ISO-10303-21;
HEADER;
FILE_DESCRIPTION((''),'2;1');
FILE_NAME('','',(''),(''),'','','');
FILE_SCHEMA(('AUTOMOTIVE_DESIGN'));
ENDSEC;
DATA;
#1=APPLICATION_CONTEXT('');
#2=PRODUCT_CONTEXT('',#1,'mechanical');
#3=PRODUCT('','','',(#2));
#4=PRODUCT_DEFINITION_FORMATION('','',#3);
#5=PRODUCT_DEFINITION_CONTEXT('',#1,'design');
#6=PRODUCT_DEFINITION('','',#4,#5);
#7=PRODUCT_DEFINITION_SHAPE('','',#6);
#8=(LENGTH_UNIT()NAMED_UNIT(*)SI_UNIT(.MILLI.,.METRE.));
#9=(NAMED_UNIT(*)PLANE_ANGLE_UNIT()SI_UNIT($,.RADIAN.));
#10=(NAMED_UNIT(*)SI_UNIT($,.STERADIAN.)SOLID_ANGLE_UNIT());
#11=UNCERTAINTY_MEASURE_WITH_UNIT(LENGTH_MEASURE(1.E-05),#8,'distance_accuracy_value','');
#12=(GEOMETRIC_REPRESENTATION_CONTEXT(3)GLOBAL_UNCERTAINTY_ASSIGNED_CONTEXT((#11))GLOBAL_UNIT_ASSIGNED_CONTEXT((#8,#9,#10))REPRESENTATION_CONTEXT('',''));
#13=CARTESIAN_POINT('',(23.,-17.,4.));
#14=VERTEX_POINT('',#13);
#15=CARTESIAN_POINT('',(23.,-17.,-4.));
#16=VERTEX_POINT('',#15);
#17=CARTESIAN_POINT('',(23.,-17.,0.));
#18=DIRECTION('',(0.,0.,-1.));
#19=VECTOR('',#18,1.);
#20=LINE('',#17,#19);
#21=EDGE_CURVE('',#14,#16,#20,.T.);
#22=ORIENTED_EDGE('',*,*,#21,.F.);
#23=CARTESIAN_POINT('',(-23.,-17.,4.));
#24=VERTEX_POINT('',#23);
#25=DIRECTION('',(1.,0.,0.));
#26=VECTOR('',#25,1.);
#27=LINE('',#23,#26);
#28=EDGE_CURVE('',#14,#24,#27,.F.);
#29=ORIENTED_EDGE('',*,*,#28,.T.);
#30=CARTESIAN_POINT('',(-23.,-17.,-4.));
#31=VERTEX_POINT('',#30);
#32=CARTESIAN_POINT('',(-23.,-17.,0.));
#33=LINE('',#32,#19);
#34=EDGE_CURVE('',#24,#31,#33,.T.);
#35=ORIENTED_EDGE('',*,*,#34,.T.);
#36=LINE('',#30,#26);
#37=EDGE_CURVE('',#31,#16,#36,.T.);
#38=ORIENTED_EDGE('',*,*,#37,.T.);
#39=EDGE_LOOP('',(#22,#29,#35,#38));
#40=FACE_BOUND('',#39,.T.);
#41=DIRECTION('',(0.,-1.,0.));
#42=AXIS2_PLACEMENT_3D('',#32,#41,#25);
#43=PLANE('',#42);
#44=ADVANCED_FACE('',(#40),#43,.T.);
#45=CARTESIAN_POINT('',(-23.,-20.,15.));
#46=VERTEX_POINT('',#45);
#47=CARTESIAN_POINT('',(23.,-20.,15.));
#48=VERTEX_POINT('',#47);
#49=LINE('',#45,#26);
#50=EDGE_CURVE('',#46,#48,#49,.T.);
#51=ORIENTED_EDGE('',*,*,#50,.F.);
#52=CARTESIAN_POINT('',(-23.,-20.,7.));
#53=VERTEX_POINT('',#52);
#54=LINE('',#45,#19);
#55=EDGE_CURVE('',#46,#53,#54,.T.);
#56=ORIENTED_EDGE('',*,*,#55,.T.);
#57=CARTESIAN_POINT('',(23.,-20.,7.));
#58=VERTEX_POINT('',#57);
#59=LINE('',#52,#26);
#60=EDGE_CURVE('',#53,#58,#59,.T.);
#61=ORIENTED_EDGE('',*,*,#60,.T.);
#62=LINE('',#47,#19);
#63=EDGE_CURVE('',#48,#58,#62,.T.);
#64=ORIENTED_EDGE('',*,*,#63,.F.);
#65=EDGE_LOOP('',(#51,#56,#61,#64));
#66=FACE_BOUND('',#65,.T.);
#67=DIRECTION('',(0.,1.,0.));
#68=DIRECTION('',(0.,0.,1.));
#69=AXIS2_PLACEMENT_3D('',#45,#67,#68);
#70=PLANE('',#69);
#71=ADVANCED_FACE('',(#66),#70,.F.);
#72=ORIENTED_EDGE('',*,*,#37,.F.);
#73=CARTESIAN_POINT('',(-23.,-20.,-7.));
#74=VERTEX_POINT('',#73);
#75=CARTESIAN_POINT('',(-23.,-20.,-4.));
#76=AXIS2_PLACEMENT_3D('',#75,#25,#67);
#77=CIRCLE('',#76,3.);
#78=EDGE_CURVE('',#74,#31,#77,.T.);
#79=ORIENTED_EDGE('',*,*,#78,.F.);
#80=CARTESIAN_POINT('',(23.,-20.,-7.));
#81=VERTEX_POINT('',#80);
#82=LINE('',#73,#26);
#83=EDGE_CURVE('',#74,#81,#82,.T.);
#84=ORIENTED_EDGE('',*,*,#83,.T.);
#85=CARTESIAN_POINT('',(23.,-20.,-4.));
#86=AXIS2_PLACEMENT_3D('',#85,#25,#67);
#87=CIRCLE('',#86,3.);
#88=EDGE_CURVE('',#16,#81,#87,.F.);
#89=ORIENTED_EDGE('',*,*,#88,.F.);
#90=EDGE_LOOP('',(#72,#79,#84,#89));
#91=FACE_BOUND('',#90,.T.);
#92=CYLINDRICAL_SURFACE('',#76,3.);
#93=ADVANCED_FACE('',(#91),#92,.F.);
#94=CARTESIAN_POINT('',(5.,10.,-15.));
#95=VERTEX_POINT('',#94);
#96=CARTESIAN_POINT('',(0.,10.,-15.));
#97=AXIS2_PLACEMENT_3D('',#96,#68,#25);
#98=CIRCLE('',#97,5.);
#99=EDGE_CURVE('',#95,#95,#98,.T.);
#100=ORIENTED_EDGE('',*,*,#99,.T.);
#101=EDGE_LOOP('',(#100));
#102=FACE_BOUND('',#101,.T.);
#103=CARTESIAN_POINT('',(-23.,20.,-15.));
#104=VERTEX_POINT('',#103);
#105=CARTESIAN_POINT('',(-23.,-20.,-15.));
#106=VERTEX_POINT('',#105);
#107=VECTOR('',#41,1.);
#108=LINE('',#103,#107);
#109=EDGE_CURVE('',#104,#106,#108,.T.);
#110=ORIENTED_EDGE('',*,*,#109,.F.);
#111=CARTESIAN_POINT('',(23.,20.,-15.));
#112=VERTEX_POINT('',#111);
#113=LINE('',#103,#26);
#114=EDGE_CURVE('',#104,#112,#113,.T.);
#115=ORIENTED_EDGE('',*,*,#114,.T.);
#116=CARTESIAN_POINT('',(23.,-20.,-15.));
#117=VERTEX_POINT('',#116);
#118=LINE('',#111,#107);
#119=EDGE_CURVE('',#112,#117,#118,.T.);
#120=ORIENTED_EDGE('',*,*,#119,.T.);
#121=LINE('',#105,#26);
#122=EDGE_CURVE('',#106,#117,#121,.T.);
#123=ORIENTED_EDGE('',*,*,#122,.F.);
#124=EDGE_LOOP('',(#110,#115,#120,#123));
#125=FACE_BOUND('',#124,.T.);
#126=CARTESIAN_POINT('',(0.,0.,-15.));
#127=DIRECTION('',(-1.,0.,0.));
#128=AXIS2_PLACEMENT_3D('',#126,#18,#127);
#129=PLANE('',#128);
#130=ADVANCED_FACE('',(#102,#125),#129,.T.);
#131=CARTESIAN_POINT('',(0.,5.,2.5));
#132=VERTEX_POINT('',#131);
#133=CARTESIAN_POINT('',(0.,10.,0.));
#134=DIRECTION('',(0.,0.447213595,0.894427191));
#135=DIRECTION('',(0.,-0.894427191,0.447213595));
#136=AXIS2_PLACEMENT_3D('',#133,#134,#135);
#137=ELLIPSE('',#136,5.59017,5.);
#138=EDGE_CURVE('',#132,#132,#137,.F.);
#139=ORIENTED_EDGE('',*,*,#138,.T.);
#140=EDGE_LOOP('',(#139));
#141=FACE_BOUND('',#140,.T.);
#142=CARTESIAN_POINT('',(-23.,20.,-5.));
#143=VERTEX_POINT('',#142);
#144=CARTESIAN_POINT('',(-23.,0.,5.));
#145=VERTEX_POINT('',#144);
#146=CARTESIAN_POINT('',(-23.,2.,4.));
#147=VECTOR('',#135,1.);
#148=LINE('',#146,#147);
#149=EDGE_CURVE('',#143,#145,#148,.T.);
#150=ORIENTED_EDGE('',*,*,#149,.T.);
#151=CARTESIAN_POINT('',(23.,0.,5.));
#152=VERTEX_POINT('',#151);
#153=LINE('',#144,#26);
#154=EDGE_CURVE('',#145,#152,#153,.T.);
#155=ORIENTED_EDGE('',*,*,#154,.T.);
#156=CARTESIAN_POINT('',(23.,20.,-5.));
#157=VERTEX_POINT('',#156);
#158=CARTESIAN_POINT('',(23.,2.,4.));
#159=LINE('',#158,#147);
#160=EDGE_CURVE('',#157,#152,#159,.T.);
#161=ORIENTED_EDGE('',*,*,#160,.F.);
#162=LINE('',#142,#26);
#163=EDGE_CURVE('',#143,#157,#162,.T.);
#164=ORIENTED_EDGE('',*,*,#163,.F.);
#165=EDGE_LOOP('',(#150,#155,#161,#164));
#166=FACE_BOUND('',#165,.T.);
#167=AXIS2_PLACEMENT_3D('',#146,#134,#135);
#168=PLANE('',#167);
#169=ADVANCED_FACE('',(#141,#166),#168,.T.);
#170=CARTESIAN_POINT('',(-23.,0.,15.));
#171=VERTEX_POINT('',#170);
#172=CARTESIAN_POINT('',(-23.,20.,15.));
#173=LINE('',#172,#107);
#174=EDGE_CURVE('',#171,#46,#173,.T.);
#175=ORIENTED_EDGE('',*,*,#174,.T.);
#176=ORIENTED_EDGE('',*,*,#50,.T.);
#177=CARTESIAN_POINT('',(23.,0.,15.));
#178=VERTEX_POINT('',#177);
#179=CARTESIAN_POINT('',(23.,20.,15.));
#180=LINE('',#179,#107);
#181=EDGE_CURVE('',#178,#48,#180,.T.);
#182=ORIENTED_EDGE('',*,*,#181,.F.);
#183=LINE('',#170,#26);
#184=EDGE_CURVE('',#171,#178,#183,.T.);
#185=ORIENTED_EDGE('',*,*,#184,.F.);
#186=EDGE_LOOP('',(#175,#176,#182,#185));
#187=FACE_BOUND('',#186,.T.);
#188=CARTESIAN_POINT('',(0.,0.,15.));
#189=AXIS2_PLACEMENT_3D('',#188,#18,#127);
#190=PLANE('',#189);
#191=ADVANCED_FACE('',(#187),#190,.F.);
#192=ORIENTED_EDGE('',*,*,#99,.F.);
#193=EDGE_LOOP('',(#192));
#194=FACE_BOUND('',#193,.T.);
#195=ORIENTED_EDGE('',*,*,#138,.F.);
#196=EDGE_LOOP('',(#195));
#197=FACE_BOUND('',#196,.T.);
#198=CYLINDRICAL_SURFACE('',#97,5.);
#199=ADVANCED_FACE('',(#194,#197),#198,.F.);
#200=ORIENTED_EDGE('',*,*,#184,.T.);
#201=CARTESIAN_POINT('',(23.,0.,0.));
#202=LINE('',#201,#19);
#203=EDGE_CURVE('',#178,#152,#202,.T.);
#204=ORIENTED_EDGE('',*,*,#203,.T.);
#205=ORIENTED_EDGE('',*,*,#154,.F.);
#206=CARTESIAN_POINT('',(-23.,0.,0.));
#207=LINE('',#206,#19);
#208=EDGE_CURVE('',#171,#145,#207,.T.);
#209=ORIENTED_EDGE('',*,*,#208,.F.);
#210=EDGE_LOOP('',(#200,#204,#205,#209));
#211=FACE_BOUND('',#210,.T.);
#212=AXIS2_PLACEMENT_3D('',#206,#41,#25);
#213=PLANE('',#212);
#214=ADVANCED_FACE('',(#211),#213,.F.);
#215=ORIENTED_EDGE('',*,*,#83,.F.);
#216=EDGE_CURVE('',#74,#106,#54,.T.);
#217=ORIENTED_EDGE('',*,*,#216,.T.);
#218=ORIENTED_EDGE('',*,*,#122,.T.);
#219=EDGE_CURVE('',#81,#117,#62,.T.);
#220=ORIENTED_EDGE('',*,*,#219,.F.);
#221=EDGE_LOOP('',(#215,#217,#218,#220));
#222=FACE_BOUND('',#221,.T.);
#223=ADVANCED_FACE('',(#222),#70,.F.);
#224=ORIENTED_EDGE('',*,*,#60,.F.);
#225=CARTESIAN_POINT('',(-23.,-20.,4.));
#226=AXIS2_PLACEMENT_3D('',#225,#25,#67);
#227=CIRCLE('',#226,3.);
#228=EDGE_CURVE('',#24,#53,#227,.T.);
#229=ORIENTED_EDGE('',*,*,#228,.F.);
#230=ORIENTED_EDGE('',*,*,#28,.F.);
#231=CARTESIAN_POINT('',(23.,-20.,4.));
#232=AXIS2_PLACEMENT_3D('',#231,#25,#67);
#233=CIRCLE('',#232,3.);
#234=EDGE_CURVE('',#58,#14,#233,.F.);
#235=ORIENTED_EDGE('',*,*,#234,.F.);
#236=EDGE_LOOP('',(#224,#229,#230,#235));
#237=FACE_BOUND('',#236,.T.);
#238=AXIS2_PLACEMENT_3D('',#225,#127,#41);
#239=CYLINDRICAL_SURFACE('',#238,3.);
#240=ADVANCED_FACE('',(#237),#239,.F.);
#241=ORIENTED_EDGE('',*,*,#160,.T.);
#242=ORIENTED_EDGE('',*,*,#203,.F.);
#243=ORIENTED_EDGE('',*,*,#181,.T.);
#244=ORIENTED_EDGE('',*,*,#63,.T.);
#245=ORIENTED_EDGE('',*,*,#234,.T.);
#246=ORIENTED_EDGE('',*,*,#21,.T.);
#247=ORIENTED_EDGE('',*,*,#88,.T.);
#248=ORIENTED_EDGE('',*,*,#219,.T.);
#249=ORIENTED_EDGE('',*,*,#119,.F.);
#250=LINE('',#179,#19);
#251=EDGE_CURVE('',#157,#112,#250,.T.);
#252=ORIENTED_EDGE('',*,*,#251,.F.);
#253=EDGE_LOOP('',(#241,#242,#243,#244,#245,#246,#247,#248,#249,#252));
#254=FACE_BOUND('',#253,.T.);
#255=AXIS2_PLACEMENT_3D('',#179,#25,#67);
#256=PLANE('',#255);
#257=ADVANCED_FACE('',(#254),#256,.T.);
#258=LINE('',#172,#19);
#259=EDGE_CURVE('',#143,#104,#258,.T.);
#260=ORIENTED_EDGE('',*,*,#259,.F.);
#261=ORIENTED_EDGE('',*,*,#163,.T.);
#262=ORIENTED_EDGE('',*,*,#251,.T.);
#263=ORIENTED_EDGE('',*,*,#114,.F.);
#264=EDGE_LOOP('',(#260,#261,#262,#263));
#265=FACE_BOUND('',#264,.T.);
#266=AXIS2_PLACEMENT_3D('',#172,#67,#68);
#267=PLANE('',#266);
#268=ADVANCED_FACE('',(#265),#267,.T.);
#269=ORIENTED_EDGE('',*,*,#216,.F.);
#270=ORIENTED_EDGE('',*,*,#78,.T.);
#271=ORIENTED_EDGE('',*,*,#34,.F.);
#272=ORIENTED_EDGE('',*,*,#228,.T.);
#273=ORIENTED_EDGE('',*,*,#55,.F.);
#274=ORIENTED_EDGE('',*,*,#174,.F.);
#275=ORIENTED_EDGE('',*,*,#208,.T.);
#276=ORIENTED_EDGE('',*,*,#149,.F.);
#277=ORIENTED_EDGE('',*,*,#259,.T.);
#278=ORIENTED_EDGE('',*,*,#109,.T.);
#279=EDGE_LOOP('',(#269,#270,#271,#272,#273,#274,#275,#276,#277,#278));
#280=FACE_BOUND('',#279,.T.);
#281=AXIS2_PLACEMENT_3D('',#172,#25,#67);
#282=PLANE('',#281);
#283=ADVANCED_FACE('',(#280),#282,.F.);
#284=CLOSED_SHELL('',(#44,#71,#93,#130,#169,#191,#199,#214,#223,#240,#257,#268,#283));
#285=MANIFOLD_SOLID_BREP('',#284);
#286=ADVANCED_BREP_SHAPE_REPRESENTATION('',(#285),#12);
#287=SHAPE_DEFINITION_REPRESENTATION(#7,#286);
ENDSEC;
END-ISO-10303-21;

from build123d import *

# Parameters (mm, degrees)
SKETCH_1_W          = 46
SKETCH_1_H          = 40
EXTRUDE_1_DEPTH     = 15
SKETCH_2_R          = 5
CUT_EXTRUDE_1_DEPTH = 43.766809561
SKETCH_4_W          = 14
SKETCH_4_H          = 3
CUT_EXTRUDE_2_DEPTH = 53.354560451
FILLET_3_R          = 3
FILLET_8_R          = 3
CUT_EXTRUDE_3_DEPTH = 53.354560451


with BuildPart() as part:
    # 草圖1 → 填料-伸長1 (new, symmetric)
    with BuildSketch(Plane.XY):
        Rectangle(SKETCH_1_W, SKETCH_1_H)
    extrude(amount=EXTRUDE_1_DEPTH, both=True)

    # 草圖2 → 除料-伸長1 (cut, through all)
    with BuildSketch(Plane.XY.offset(15)):
        with Locations((0, 10)):
            Circle(SKETCH_2_R)
    extrude(amount=-CUT_EXTRUDE_1_DEPTH, mode=Mode.SUBTRACT)

    # 草圖4 → 除料-伸長2 (cut, through all)
    with BuildSketch(Plane(origin=(23, 0, 0), x_dir=(0, 0, -1), z_dir=(1, 0, 0))):
        with Locations((0, -18.5)):
            Rectangle(SKETCH_4_W, SKETCH_4_H)
    extrude(amount=-CUT_EXTRUDE_2_DEPTH, mode=Mode.SUBTRACT)

    # 圓角3
    fillet_3_edges = [part.edges().sort_by_distance(p)[0] for p in [
        (0, -17, 7),
    ]]
    fillet(fillet_3_edges, radius=FILLET_3_R - 0.0001)  # a hair under: the kernel refuses the full size

    # 圓角8
    fillet_8_edges = [part.edges().sort_by_distance(p)[0] for p in [
        (0, -17, -7),
    ]]
    fillet(fillet_8_edges, radius=FILLET_8_R - 0.0001)  # a hair under: the kernel refuses the full size

    # 草圖5 → 除料-伸長3 (cut, through all)
    with BuildSketch(Plane(origin=(23, 0, 0), x_dir=(0, 0, -1), z_dir=(1, 0, 0))):
        Polygon((-5, 0), (5, 20), (-5, 20), (-15, 20), (-15, 0), align=None)
    extrude(amount=-CUT_EXTRUDE_3_DEPTH, mode=Mode.SUBTRACT)


solid = part.part
